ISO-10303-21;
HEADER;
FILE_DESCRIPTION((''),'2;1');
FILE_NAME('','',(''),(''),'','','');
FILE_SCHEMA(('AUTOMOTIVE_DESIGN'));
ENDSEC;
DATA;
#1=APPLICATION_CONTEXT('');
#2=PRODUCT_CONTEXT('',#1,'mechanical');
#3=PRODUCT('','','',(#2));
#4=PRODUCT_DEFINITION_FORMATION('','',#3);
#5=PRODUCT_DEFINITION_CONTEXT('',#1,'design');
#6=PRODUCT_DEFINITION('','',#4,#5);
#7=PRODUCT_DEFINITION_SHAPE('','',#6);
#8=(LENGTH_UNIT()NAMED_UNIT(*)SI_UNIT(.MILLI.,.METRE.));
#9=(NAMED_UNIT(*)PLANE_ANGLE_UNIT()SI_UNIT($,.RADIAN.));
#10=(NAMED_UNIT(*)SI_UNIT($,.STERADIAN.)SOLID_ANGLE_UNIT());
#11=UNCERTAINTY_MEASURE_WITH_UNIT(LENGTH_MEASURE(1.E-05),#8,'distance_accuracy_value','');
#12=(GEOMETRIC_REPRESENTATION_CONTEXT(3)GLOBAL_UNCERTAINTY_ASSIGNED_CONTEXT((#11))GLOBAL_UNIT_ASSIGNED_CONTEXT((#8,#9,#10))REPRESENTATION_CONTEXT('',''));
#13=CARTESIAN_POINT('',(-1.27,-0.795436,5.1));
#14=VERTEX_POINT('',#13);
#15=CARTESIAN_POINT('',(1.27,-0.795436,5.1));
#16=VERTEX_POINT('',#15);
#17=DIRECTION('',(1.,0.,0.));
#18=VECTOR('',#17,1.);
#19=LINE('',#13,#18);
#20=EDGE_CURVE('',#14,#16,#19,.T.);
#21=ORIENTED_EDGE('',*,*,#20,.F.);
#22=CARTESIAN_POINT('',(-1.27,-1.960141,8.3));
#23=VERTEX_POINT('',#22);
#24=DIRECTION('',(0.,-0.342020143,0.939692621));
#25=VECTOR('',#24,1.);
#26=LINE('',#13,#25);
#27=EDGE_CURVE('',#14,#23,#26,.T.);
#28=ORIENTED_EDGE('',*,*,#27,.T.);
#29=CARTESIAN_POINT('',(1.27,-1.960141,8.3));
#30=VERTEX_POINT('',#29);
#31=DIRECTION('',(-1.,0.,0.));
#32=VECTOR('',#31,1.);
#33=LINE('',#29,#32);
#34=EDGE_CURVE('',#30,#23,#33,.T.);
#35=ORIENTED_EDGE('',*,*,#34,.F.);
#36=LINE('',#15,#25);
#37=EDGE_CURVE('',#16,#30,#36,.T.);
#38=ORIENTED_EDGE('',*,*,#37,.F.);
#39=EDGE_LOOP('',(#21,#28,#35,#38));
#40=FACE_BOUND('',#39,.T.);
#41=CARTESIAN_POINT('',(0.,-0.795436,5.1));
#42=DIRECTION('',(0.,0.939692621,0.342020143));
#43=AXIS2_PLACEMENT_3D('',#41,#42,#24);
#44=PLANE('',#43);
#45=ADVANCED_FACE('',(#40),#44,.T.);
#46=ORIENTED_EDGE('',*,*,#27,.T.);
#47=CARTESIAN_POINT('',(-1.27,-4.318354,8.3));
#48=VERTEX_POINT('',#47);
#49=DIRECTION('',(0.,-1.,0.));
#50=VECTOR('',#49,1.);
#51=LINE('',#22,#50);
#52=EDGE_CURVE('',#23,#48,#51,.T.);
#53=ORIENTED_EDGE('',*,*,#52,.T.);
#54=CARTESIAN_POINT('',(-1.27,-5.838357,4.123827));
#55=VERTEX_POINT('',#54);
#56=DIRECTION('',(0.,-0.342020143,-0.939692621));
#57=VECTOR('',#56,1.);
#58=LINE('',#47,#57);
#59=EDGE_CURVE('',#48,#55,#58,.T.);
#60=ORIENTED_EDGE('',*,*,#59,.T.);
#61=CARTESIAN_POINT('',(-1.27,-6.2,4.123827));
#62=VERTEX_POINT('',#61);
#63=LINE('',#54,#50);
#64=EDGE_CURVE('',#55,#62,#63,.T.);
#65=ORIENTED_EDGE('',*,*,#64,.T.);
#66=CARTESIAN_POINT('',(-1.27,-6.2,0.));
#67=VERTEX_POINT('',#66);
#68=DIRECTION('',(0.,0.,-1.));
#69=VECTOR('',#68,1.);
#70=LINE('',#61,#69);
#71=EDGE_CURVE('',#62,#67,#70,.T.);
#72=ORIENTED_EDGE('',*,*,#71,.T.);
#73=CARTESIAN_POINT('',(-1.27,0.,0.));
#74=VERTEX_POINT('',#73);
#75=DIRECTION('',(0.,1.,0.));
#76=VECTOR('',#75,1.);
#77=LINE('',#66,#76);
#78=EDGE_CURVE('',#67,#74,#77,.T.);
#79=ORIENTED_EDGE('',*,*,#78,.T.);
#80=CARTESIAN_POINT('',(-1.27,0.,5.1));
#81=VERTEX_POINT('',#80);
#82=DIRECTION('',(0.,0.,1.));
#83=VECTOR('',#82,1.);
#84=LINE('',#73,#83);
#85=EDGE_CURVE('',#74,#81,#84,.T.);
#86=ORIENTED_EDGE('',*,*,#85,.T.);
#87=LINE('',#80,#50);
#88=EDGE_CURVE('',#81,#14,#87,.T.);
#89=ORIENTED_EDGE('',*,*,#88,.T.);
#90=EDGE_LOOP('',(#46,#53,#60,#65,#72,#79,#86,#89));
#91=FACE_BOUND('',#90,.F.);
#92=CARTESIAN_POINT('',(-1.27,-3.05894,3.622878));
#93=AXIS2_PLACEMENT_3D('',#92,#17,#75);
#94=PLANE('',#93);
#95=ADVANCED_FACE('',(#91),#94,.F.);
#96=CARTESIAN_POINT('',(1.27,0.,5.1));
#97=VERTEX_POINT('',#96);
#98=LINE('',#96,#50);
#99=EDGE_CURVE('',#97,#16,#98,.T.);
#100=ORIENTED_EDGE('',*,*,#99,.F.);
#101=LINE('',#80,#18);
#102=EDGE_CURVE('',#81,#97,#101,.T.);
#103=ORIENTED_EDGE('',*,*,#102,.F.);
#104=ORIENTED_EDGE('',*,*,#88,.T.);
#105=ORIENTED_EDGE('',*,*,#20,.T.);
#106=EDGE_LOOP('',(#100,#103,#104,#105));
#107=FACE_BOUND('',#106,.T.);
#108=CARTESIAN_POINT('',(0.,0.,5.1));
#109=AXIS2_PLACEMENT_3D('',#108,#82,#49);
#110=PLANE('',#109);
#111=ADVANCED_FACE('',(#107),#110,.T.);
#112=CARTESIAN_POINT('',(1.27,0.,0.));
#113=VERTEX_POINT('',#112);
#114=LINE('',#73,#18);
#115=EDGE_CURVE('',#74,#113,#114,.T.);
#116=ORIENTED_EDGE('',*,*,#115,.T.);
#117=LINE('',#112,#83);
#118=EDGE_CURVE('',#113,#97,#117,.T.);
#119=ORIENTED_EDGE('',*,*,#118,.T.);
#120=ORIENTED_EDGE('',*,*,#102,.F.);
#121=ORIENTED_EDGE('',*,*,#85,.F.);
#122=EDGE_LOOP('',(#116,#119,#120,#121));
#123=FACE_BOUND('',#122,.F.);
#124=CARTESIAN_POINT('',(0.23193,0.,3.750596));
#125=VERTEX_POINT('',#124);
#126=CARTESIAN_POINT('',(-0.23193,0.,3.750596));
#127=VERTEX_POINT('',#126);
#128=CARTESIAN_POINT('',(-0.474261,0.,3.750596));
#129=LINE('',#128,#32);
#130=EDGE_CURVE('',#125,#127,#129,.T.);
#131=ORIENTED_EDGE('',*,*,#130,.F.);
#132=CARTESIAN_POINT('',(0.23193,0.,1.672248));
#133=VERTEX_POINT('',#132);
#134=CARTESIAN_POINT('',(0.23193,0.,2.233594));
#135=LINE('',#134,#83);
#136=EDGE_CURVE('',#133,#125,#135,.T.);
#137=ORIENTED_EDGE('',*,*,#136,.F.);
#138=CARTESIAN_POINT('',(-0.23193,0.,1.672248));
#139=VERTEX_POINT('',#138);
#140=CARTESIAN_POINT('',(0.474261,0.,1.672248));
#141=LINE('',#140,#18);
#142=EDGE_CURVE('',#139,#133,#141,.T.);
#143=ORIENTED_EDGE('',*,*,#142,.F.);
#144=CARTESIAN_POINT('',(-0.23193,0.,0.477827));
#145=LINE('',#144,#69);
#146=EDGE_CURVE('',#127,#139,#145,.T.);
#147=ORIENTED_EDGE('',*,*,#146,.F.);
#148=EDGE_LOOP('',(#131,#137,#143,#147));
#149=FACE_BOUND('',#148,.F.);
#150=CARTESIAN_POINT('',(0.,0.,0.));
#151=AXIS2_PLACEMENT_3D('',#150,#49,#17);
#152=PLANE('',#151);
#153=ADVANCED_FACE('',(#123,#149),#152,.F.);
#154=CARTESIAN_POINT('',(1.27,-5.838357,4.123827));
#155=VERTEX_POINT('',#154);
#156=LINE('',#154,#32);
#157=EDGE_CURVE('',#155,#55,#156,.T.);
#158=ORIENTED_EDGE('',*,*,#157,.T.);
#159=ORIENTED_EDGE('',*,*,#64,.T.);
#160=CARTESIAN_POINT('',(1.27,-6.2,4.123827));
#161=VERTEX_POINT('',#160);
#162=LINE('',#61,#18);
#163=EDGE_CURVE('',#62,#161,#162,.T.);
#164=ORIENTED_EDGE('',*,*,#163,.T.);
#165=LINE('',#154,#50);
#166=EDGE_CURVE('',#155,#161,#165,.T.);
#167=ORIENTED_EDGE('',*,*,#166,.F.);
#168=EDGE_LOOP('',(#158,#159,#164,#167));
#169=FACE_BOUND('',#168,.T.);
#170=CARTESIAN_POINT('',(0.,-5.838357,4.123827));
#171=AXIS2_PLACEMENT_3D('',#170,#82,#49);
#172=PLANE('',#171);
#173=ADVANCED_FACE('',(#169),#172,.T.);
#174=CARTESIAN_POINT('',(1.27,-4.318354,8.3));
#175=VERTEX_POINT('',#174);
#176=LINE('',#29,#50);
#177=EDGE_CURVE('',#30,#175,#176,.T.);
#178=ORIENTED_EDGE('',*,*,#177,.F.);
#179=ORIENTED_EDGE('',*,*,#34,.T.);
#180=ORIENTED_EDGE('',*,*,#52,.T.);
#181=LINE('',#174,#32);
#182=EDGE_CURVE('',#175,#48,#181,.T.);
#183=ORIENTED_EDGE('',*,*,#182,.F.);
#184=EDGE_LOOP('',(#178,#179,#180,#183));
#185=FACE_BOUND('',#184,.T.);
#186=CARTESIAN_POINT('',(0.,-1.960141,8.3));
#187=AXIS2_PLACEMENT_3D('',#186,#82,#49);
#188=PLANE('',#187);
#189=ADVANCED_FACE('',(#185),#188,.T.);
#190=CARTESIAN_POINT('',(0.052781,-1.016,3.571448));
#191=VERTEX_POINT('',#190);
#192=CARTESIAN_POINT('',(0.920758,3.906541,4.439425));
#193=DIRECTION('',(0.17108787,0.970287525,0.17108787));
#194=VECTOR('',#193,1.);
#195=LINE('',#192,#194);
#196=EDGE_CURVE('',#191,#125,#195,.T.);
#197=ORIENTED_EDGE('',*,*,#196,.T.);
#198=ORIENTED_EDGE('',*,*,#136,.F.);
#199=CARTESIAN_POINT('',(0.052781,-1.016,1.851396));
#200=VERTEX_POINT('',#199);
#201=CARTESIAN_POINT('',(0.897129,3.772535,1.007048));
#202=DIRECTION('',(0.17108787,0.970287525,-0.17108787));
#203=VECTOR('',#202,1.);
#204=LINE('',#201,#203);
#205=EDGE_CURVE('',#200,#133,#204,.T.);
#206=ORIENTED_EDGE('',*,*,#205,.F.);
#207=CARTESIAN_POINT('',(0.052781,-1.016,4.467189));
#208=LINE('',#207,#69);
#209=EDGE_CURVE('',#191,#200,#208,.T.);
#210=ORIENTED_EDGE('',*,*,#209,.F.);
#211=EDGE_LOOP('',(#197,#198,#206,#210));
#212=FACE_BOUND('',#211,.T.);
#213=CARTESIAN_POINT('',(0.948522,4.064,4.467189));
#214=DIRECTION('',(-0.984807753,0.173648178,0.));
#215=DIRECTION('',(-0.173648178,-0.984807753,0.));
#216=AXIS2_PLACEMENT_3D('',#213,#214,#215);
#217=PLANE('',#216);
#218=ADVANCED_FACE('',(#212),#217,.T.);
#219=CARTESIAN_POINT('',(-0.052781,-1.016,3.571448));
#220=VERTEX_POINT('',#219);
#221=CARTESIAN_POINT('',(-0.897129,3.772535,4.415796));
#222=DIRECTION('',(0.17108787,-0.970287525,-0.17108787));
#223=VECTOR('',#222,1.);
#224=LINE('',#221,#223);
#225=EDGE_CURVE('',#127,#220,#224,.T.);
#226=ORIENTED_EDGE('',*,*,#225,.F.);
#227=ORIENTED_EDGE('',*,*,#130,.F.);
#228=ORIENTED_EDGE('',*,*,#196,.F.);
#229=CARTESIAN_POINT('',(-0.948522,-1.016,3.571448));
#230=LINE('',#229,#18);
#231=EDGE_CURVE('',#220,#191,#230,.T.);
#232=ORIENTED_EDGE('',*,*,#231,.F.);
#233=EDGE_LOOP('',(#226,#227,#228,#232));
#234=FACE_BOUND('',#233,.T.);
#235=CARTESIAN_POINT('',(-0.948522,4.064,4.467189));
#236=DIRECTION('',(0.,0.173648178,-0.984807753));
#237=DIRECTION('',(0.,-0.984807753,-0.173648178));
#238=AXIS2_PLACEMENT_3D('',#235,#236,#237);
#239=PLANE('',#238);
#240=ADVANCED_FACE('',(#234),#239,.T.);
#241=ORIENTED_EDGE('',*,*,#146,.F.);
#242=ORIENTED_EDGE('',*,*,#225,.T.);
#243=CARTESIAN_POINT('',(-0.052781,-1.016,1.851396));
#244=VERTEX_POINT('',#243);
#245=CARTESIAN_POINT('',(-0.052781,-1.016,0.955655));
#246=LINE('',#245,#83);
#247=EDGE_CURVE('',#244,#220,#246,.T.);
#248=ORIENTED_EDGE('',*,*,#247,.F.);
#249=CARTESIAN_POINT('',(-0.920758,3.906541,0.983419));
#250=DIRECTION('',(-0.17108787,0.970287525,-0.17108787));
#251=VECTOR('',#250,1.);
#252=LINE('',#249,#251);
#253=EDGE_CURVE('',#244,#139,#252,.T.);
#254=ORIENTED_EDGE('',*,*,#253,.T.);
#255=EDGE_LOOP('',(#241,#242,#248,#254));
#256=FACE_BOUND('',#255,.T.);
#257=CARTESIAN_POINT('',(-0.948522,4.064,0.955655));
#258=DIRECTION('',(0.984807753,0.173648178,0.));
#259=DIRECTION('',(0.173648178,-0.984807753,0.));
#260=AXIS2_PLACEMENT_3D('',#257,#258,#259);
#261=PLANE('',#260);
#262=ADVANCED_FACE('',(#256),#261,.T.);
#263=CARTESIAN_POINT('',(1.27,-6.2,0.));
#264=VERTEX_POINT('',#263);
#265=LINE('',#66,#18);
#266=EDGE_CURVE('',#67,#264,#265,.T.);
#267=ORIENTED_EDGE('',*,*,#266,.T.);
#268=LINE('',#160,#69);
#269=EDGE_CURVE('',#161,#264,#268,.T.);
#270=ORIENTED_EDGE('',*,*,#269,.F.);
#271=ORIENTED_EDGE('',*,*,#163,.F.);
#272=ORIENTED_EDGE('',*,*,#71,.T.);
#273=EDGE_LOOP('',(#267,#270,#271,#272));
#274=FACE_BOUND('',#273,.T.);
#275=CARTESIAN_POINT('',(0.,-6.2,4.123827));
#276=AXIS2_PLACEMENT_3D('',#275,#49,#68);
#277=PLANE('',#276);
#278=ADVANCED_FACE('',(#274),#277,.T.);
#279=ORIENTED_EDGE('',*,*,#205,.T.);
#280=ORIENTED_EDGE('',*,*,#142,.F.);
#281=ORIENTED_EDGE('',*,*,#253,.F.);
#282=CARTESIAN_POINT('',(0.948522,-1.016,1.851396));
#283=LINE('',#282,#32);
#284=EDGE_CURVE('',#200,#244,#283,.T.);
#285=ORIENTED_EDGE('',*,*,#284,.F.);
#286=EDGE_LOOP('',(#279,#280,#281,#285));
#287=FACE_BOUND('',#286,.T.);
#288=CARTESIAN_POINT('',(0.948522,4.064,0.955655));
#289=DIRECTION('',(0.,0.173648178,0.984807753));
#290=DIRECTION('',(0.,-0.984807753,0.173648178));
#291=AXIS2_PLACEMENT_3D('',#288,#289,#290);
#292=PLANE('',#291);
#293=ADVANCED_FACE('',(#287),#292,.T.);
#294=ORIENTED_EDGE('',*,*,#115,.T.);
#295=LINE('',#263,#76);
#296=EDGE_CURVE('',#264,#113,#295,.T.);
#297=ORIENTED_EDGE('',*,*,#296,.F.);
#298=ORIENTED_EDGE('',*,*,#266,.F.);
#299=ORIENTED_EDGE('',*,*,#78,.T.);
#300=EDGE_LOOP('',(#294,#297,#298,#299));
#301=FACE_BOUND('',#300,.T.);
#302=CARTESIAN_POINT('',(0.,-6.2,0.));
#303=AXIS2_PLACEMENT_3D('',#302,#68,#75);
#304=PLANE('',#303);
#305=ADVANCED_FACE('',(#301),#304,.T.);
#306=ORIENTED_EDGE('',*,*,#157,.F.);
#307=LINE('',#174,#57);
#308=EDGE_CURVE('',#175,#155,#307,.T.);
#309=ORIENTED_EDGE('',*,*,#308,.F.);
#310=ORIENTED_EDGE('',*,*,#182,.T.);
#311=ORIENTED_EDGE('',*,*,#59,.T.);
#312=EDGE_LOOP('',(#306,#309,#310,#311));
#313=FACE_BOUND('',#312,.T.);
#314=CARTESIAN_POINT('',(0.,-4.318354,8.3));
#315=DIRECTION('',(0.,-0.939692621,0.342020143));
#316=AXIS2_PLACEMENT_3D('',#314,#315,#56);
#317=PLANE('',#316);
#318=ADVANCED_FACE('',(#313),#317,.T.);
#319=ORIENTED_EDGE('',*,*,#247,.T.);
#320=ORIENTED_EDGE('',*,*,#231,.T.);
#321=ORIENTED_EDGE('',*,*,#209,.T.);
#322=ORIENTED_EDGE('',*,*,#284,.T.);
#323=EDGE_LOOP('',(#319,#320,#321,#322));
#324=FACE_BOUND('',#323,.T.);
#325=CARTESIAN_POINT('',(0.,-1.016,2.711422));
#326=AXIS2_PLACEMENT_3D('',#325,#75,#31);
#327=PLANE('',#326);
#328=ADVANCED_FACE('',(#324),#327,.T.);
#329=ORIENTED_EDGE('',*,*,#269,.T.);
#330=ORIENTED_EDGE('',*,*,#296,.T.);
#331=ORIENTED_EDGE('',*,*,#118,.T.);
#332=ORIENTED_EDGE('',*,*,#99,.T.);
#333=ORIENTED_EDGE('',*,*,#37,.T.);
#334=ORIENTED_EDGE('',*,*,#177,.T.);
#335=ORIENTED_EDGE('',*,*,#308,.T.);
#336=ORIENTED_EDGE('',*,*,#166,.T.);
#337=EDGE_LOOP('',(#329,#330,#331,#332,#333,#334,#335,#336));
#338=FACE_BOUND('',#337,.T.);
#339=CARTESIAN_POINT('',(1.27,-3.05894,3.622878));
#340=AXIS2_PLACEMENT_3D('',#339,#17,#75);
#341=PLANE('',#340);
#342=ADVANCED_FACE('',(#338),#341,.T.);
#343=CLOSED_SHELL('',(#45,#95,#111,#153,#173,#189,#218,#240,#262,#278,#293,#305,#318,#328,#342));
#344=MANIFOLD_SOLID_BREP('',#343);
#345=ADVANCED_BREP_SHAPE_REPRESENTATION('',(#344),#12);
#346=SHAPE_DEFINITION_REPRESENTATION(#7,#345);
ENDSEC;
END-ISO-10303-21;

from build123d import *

# Parameters (mm, degrees)
F1_DEPTH     = 1.27
F2_W         = 1.8970449455
F2_H         = 3.5115340725
F3_DEPTH     = 1.016
F4_T4_DEPTH  = 1.8970449455
F4_T9_DEPTH  = 3.5115340725
F4_T14_DEPTH = 1.8970449455
F4_T19_DEPTH = 3.5115340725


# Not quite as in the source:
# - a fillet or chamfer that OpenCascade refuses, or shapes differently, is made with other operations: its cross-section is extruded or revolved along the edge and cut away or added


with BuildPart() as f1:
    # F0 (on Right) → F1 (new body, symmetric)
    with BuildSketch(Plane.YZ):
        Polygon((-5.8383567513, 4.1238272734), (-6.2, 4.1238272734), (-6.2, 0), (0, 0), (0, 5.1), (-0.7954361361, 5.1), (-1.9601408858, 8.3), (-4.3183541857, 8.3), align=None)
    extrude(amount=F1_DEPTH, both=True)

    # F2 (on face) → F3 (cut)
    with BuildSketch(Plane(origin=(0, 0, 0), x_dir=(-1, 0, 0), z_dir=(0, 1, 0))):
        with Locations((0, 2.7114218101)):
            Rectangle(F2_W, F2_H)
    extrude(amount=-F3_DEPTH, mode=Mode.SUBTRACT)

    # F4: chamfer of 5.08 x 0.895741062 on 4 edges, made by hand


with BuildPart() as f4_tool2:
    # F4_s3 → F4_t4 (new body)
    with BuildSketch(Plane.YZ.offset(-0.9485224728)):
        Polygon((4.064, 4.4671888463), (-1.016, 3.5714477843), (-1.016, 4.4671888463), align=None)
    extrude(amount=F4_T4_DEPTH)

    split(bisect_by=Plane.XZ, keep=Keep.TOP)


with BuildPart() as f1_1:
    add(f1.part)

    # F4_t1: union F4_tool2
    add(f4_tool2.part)


with BuildPart() as f4_tool7:
    # F4_s8 → F4_t9 (new body)
    with BuildSketch(Plane.XY.offset(4.4671888463)):
        Polygon((0.9485224728, 4.064), (0.0527814108, -1.016), (0.9485224728, -1.016), align=None)
    extrude(amount=-F4_T9_DEPTH)

    split(bisect_by=Plane.XZ, keep=Keep.TOP)


with BuildPart() as f1_2:
    add(f1_1.part)

    # F4_t6: union F4_tool7
    add(f4_tool7.part)


with BuildPart() as f4_tool12:
    # F4_s13 → F4_t14 (new body)
    with BuildSketch(Plane.YZ.offset(0.9485224728)):
        Polygon((4.064, 0.9556547739), (-1.016, 1.8513958359), (-1.016, 0.9556547739), align=None)
    extrude(amount=-F4_T14_DEPTH)

    split(bisect_by=Plane.XZ, keep=Keep.TOP)


with BuildPart() as f1_3:
    add(f1_2.part)

    # F4_t11: union F4_tool12
    add(f4_tool12.part)


with BuildPart() as f4_tool17:
    # F4_s18 → F4_t19 (new body)
    with BuildSketch(Plane.XY.offset(0.9556547739)):
        Polygon((-0.9485224728, 4.064), (-0.0527814108, -1.016), (-0.9485224728, -1.016), align=None)
    extrude(amount=F4_T19_DEPTH)

    split(bisect_by=Plane.XZ, keep=Keep.TOP)


with BuildPart() as f1_4:
    add(f1_3.part)

    # F4_t16: union F4_tool17
    add(f4_tool17.part)


solid = f1_4.part
